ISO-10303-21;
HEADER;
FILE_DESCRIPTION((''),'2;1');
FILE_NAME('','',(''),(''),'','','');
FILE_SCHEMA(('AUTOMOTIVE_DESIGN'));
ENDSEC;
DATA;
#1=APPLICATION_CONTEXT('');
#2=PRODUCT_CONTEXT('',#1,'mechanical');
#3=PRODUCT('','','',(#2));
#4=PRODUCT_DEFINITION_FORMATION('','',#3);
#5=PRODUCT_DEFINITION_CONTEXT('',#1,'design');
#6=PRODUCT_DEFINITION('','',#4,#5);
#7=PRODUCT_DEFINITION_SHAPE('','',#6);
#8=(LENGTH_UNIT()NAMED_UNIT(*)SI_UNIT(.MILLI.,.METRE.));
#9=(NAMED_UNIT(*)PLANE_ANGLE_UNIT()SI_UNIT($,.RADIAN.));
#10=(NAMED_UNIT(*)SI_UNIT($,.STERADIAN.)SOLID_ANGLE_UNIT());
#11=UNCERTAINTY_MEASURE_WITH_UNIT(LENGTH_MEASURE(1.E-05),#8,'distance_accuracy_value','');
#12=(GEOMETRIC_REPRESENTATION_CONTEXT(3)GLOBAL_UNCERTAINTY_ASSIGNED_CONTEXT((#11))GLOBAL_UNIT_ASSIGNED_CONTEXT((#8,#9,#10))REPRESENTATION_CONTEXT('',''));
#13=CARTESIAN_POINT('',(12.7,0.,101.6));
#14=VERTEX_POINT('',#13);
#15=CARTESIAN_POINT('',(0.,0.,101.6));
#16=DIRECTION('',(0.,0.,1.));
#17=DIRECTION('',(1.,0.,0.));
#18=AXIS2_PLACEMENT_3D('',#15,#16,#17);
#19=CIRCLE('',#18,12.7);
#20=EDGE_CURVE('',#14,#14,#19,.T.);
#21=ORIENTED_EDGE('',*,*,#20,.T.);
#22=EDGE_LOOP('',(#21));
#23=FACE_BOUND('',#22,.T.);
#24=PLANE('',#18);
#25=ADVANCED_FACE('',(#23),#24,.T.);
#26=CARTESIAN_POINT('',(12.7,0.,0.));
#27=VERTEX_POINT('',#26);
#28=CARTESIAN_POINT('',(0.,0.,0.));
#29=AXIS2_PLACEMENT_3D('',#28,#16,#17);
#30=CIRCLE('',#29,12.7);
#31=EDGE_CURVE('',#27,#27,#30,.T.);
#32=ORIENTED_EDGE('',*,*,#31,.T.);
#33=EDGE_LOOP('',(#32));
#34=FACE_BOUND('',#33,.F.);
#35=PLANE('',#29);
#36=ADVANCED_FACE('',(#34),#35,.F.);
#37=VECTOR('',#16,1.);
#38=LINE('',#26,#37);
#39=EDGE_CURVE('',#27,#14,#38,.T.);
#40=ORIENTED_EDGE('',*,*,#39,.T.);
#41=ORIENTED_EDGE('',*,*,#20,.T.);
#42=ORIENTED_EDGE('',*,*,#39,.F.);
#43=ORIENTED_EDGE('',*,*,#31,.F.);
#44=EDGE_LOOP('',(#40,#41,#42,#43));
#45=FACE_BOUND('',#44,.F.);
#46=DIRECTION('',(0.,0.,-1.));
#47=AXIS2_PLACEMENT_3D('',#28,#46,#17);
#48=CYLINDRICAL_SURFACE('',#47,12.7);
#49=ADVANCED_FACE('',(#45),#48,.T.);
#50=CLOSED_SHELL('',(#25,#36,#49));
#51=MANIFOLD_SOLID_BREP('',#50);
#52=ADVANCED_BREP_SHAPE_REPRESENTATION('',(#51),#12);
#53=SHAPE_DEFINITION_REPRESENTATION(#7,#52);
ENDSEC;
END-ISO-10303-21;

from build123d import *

# Parameters (mm, degrees)
F0_R     = 12.7
F1_DEPTH = 101.6


# Not quite as in the source:
# - a feature of the source that left no trace in its solid (it failed there, or was rolled back) is left out


with BuildPart() as f1:
    # F0 (on Top) → F1 (new body)
    with BuildSketch(Plane.XY):
        Circle(F0_R)
    extrude(amount=F1_DEPTH)


solid = f1.part
